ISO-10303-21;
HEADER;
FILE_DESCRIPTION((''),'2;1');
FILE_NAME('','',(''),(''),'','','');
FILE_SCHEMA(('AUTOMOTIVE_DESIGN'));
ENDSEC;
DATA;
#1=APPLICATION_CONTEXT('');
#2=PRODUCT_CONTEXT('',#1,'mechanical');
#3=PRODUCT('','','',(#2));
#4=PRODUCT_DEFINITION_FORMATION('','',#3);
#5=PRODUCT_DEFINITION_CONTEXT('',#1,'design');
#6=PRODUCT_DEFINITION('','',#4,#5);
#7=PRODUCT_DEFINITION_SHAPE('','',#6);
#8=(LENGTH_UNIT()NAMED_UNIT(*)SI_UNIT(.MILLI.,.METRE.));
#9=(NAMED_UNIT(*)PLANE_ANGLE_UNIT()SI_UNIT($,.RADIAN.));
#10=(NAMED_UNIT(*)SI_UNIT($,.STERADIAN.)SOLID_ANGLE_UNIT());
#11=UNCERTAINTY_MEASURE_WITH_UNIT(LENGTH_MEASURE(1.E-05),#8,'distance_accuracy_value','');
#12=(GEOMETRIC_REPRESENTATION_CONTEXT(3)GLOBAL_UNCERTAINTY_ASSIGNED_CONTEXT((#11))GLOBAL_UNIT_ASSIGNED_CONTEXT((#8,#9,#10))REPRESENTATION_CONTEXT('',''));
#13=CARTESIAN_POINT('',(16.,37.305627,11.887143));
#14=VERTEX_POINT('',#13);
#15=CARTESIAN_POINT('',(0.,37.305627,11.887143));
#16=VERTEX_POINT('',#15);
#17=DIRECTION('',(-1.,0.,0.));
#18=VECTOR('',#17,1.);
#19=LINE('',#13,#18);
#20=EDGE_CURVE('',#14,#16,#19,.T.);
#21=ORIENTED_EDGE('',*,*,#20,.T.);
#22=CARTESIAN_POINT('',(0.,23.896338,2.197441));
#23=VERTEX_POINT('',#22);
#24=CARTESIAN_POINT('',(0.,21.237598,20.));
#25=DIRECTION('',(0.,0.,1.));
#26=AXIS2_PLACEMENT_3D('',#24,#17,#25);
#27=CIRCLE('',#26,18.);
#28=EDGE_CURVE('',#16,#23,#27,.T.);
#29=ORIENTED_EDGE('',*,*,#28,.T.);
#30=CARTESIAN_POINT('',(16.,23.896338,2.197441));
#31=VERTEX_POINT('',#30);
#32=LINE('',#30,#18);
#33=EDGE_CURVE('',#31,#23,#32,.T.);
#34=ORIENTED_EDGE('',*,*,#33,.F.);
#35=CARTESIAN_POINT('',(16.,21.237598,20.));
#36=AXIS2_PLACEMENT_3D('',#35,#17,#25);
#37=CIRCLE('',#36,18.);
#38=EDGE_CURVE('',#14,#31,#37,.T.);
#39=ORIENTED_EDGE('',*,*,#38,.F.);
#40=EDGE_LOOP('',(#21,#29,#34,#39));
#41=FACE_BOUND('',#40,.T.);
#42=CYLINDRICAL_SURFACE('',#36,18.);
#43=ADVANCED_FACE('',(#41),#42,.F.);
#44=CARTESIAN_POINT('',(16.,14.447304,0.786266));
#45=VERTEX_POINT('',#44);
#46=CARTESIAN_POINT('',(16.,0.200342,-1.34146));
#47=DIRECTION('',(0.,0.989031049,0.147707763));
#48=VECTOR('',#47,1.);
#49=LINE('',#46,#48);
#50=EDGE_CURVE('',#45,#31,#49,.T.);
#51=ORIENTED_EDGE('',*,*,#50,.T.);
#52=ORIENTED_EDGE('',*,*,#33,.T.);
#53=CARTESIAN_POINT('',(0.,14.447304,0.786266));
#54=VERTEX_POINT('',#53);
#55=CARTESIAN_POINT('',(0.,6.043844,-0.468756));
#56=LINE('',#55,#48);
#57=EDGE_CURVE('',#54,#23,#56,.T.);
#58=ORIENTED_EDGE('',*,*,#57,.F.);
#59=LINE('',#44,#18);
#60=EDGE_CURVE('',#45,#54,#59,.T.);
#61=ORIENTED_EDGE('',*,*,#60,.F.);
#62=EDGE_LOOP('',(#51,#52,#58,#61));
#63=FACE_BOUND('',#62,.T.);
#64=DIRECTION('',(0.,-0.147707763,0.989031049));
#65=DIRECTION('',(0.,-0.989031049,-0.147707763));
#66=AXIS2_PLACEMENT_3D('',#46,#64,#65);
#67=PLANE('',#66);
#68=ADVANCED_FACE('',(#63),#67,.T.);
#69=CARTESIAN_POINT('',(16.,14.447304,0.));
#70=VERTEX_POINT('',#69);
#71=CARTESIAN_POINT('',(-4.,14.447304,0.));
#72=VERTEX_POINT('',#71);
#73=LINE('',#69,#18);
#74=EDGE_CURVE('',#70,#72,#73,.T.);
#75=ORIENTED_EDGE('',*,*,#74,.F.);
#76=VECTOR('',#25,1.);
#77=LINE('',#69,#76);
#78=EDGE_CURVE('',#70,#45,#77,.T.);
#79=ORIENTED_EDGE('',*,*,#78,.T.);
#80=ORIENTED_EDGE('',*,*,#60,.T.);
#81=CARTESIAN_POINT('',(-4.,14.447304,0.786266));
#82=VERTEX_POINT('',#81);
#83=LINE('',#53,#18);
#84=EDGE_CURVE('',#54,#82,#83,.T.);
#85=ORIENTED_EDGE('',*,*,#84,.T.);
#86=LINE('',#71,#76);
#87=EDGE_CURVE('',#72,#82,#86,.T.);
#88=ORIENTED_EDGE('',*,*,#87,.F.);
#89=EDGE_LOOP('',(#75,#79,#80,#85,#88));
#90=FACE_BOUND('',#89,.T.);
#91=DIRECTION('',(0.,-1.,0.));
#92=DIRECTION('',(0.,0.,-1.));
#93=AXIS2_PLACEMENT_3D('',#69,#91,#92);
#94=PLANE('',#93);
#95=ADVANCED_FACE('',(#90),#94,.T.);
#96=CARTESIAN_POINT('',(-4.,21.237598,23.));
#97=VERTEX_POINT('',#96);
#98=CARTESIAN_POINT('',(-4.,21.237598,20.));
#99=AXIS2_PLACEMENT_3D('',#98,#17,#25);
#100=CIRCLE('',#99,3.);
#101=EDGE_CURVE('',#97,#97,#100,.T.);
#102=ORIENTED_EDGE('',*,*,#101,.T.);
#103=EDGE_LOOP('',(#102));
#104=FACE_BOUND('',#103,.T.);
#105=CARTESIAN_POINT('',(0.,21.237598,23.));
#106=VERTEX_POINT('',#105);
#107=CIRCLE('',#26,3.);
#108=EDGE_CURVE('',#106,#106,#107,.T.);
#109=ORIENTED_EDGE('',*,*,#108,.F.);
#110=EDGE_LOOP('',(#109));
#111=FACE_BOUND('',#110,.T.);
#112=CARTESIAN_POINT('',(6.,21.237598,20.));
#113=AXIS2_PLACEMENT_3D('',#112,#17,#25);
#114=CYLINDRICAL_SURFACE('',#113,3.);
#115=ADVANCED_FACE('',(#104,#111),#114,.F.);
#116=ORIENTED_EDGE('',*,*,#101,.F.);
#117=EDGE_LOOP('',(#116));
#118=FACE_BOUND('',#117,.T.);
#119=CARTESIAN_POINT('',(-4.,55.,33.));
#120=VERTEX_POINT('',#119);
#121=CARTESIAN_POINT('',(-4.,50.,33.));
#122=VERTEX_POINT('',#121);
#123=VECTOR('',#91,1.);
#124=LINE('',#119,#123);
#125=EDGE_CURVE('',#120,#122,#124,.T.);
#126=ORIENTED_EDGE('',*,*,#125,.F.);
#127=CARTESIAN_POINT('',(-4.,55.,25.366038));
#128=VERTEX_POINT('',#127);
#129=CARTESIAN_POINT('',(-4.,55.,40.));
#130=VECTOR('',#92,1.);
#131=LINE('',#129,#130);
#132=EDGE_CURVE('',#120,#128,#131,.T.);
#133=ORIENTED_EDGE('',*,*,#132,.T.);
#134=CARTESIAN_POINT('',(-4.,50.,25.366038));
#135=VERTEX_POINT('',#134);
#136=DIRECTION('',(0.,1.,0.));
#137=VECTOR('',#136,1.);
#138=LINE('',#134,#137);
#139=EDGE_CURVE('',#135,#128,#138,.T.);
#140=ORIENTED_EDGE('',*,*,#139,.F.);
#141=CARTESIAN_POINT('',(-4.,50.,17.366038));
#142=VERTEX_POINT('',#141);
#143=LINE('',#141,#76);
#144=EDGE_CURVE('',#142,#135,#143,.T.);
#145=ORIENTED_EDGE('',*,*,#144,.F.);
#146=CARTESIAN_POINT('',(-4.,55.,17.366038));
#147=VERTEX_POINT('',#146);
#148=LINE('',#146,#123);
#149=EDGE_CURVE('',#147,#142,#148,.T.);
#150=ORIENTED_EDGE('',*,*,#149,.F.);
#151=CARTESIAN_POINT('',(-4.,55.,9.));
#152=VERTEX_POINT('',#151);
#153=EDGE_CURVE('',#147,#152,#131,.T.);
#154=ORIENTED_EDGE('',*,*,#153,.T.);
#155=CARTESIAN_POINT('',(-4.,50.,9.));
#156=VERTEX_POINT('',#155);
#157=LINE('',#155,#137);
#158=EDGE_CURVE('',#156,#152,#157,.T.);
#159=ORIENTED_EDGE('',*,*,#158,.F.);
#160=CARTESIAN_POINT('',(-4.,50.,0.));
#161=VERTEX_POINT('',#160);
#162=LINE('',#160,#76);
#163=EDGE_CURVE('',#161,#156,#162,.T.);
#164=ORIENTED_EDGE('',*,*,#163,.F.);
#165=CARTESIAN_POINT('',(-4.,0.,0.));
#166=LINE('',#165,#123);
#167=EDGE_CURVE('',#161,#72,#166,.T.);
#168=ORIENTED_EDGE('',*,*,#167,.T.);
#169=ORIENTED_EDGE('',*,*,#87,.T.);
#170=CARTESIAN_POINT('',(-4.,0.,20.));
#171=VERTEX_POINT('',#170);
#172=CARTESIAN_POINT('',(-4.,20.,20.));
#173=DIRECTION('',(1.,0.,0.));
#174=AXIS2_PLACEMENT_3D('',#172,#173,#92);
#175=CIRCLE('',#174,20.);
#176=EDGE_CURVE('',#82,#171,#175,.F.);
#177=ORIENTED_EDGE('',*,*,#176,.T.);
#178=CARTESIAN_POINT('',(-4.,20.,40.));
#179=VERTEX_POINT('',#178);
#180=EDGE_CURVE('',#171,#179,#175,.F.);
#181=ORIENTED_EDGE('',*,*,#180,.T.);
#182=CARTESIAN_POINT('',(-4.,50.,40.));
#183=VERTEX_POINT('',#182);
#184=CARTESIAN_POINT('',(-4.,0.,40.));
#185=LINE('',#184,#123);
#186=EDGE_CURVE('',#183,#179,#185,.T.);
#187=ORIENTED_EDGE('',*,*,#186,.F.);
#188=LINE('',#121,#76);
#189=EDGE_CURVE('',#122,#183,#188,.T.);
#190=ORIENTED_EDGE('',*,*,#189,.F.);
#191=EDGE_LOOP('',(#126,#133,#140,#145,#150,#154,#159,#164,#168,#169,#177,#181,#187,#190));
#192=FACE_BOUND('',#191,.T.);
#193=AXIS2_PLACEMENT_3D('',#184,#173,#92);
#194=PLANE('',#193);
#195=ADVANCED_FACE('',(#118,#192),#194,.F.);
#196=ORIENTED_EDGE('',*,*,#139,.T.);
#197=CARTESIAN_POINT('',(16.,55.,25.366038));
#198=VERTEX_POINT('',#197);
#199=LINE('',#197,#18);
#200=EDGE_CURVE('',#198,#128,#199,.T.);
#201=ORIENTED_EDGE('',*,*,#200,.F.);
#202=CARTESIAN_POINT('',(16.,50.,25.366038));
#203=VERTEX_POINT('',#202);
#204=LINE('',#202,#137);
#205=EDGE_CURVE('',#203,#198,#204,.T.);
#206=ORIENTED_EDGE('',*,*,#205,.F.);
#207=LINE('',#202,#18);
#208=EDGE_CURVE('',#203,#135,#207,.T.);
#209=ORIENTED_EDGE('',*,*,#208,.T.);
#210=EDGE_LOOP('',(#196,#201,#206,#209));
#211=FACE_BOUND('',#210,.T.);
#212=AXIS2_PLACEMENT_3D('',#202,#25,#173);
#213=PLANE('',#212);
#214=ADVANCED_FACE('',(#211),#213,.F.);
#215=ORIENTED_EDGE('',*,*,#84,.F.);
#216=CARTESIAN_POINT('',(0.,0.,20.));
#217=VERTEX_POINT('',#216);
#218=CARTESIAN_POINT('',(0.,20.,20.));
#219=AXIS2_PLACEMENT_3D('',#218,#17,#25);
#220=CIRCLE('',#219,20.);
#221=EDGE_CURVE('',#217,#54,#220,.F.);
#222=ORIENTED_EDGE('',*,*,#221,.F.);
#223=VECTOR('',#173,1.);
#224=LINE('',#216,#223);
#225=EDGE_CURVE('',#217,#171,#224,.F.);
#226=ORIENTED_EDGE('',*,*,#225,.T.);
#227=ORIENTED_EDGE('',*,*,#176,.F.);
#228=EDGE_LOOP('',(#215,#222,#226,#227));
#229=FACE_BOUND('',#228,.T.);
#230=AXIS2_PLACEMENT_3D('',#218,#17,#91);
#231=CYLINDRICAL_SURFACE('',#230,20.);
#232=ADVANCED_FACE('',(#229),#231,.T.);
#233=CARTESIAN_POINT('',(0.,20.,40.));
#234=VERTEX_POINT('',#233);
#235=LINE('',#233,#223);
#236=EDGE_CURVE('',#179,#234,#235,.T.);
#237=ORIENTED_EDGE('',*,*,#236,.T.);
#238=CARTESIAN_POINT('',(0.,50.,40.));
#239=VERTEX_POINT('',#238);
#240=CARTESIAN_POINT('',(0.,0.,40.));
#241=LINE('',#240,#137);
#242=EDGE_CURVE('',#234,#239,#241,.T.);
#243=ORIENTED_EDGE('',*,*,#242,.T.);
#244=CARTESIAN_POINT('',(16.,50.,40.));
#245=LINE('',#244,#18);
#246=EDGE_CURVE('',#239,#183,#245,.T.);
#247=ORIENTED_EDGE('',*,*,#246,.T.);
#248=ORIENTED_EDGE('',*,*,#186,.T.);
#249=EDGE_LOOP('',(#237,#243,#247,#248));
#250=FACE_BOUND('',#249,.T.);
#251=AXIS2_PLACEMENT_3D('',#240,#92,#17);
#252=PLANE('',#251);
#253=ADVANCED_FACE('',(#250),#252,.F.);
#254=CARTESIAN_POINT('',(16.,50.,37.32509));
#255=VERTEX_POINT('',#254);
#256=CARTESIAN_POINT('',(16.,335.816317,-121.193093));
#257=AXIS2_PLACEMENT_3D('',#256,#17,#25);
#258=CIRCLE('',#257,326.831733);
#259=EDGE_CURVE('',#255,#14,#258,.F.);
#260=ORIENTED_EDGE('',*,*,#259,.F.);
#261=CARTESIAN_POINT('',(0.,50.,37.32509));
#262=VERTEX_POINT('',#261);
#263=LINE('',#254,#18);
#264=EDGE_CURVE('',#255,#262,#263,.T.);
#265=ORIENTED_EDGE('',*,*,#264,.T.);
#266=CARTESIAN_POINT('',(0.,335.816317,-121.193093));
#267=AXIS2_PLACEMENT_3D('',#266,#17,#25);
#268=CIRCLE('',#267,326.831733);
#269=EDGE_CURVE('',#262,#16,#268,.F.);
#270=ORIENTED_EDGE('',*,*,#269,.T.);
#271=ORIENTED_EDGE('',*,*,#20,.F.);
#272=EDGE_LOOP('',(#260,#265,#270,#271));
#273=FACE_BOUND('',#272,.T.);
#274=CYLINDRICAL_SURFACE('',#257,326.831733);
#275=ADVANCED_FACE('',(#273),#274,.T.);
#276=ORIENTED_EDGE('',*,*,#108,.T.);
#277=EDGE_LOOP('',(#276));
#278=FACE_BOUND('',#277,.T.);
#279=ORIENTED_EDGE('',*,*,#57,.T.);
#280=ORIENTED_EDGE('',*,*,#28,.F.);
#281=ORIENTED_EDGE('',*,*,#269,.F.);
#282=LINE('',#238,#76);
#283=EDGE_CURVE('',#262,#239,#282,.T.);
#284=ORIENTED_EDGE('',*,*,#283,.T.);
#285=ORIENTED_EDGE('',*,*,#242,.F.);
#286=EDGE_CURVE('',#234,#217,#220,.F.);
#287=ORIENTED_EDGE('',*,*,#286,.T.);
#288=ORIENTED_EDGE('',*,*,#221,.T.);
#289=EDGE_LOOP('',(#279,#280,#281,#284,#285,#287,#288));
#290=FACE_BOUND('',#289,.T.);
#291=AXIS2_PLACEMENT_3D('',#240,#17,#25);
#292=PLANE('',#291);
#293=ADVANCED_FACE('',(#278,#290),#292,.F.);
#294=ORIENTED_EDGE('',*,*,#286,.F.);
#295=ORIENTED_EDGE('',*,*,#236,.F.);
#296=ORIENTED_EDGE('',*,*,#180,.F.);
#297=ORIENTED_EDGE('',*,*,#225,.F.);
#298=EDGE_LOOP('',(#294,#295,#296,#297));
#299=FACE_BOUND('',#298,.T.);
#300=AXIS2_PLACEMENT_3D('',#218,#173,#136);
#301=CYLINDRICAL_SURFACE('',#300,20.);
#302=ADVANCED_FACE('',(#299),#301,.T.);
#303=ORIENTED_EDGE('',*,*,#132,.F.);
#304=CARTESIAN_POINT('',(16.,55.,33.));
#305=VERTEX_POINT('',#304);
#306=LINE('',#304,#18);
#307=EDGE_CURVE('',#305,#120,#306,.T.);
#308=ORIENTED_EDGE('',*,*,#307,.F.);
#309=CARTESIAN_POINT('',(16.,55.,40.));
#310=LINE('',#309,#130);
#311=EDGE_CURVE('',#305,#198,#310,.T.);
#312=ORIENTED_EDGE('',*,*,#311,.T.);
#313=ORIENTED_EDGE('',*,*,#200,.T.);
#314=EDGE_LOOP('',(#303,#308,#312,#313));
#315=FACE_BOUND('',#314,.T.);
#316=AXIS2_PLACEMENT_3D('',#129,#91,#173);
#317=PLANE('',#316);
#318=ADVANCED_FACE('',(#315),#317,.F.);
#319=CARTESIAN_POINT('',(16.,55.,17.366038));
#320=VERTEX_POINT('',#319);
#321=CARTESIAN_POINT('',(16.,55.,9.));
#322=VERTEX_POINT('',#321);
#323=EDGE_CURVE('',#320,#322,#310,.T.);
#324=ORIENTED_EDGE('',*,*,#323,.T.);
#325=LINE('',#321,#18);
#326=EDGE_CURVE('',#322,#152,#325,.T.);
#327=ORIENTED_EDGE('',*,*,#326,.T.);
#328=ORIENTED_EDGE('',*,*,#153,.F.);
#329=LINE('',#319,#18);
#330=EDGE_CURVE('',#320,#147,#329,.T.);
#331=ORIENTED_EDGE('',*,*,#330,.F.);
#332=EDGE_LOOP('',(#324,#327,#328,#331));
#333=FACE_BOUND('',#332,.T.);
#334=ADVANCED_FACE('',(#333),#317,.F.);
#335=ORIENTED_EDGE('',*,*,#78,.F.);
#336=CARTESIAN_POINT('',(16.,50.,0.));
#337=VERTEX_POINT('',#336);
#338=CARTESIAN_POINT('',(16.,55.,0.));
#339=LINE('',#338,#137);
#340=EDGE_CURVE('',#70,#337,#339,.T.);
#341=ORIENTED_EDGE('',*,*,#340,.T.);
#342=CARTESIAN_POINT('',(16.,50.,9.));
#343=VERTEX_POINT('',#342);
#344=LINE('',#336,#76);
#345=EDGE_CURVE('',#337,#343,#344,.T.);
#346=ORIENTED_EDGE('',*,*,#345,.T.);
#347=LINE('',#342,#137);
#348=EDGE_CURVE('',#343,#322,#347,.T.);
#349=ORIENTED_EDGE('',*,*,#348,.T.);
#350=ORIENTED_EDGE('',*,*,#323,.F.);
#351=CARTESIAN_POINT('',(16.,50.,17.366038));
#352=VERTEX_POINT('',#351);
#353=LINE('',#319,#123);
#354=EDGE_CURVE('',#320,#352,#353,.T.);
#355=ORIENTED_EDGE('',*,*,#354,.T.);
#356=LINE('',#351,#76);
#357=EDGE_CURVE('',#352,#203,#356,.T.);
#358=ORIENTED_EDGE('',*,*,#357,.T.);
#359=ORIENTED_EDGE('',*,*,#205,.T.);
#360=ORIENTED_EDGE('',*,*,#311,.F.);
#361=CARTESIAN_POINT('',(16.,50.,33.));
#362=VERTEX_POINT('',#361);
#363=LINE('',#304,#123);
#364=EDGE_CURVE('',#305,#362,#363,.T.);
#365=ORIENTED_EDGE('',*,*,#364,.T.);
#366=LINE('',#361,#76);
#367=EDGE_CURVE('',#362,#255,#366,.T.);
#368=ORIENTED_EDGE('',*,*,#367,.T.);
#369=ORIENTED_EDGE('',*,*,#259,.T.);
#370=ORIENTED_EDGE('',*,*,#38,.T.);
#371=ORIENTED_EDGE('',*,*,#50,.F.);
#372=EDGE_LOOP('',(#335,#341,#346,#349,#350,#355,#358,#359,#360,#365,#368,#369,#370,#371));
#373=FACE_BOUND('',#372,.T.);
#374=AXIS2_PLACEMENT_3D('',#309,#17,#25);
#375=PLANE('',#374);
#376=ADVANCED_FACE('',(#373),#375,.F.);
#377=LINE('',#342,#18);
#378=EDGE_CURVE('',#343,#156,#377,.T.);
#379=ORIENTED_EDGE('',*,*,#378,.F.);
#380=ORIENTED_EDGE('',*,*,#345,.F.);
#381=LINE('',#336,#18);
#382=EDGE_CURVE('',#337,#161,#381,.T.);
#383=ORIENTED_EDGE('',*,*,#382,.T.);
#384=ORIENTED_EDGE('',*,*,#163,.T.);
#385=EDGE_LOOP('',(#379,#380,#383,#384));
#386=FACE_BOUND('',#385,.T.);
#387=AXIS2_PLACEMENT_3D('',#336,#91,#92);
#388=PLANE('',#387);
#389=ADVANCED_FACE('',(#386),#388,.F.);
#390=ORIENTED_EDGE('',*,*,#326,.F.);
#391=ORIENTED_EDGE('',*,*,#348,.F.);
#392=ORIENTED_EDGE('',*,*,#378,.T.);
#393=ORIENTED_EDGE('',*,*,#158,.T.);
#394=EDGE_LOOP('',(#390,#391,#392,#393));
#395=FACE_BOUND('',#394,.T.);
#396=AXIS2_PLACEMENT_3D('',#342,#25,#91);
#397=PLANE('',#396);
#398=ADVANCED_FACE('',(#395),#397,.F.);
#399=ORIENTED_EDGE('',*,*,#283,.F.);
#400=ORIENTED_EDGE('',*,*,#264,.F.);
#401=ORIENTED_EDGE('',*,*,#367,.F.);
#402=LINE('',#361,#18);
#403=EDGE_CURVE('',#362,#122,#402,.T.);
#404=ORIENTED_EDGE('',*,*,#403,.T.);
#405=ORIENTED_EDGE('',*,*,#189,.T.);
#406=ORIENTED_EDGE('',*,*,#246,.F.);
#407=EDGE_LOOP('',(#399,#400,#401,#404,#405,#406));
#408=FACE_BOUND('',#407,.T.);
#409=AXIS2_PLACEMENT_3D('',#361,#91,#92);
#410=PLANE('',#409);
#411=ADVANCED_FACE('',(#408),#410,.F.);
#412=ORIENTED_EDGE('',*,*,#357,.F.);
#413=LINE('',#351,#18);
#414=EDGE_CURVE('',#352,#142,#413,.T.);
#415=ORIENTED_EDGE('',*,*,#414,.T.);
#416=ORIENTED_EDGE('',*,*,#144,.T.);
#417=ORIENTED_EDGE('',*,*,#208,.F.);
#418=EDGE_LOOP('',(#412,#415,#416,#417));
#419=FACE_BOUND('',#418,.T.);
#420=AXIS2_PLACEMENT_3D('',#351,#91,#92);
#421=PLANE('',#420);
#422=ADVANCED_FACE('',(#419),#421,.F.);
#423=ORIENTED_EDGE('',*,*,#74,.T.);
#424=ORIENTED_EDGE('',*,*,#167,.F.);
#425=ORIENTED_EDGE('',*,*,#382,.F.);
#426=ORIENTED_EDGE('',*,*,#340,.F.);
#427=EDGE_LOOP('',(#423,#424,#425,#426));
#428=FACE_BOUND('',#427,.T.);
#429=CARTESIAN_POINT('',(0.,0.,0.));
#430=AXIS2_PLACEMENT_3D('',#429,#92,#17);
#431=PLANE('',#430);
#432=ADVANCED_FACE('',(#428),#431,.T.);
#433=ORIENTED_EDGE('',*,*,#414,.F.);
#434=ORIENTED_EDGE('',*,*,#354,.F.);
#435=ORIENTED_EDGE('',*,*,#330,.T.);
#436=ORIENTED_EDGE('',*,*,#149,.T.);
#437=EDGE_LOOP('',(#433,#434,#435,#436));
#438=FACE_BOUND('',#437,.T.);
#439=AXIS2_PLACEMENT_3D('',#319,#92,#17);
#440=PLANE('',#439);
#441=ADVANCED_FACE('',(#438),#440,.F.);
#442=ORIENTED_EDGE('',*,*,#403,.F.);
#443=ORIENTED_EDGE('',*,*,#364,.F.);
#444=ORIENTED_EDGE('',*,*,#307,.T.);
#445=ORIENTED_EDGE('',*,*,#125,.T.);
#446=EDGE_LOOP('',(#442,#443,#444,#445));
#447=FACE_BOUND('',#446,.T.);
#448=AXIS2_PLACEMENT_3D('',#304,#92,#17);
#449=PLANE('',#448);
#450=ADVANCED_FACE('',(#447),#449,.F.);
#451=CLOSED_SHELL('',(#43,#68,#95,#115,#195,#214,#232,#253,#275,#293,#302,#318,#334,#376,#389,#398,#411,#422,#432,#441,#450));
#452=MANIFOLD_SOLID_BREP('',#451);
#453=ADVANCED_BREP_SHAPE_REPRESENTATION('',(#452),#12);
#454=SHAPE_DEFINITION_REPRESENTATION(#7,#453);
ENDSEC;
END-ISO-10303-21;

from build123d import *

# Parameters (mm, degrees)
DODANIE_WYCI_GNI_CIE1_DEPTH = 40
ZAOKR_GLENIE1_R             = 20
DODANIE_WYCI_GNI_CIE2_DEPTH = 20
SZKIC6_R                    = 3
WYTNIJ_WYCI_GNI_CIE1_DEPTH  = 10
WYTNIJ_WYCI_GNI_CIE2_DEPTH  = 71.887234394


with BuildPart() as part:
    # Szkic1 → Dodanie-wyciągnięcie1 (new body)
    with BuildSketch(Plane.XY):
        Polygon((0, 0), (-4, 0), (-4, 55), (16, 55), (16, 51.5), (0, 51.5), align=None)
    extrude(amount=DODANIE_WYCI_GNI_CIE1_DEPTH)

    # Zaokrąglenie1
    zaokr_glenie1_edges = [part.edges().sort_by_distance(p)[0] for p in [
        (-2, 0, 0),
        (-2, 0, 40),
    ]]
    fillet(zaokr_glenie1_edges, radius=ZAOKR_GLENIE1_R - 0.0001)  # a hair under: the kernel refuses the full size

    # Szkic5 → Dodanie-wyciągnięcie2 (add)
    with BuildSketch(Plane.ZY.offset(4)):
        with BuildLine():
            ThreePointArc((0.786266298, 14.447303609), (0.197542147, 17.19595596), (0, 20))
            Line((0, 20), (0, 14.447303609))
            Line((0, 14.447303609), (0.786266298, 14.447303609))
        make_face()
        with BuildLine():
            Line((40, 51.5), (0, 51.5))
            Line((0, 51.5), (0, 20))
            ThreePointArc((0, 20), (0.197542147, 17.19595596), (0.786266298, 14.447303609))
            Line((0.786266298, 14.447303609), (2.19744111, 23.896337815))
            ThreePointArc((2.19744111, 23.896337815), (5.410467594, 31.78015679), (11.887142793, 37.30562683))
            Line((11.887142793, 37.30562683), (40, 51.5))
        make_face()
        with BuildLine():
            ThreePointArc((40, 51.5), (26.114639544, 44.064002088), (11.887142793, 37.30562683))
            Line((11.887142793, 37.30562683), (40, 51.5))
        make_face()
    extrude(amount=-DODANIE_WYCI_GNI_CIE2_DEPTH)

    # Szkic6 → Wytnij-wyciągnięcie1 (cut)
    with BuildSketch(Plane.ZY.offset(4)):
        with Locations((20, 21.237598079)):
            Circle(SZKIC6_R)
    extrude(amount=-WYTNIJ_WYCI_GNI_CIE1_DEPTH, mode=Mode.SUBTRACT)

    # Szkic8 → Wytnij-wyciągnięcie2 (cut, through all)
    with BuildSketch(Plane.ZY.offset(4)):
        Polygon((0, 50), (9, 50), (9, 55), (17.366037593, 55), (17.366037593, 50), (25.366037593, 50), (25.366037593, 55), (33, 55), (33, 50), (40, 50), (40, 57.074314744), (0, 57.074314744), align=None)
    extrude(amount=-WYTNIJ_WYCI_GNI_CIE2_DEPTH, mode=Mode.SUBTRACT)


solid = part.part
